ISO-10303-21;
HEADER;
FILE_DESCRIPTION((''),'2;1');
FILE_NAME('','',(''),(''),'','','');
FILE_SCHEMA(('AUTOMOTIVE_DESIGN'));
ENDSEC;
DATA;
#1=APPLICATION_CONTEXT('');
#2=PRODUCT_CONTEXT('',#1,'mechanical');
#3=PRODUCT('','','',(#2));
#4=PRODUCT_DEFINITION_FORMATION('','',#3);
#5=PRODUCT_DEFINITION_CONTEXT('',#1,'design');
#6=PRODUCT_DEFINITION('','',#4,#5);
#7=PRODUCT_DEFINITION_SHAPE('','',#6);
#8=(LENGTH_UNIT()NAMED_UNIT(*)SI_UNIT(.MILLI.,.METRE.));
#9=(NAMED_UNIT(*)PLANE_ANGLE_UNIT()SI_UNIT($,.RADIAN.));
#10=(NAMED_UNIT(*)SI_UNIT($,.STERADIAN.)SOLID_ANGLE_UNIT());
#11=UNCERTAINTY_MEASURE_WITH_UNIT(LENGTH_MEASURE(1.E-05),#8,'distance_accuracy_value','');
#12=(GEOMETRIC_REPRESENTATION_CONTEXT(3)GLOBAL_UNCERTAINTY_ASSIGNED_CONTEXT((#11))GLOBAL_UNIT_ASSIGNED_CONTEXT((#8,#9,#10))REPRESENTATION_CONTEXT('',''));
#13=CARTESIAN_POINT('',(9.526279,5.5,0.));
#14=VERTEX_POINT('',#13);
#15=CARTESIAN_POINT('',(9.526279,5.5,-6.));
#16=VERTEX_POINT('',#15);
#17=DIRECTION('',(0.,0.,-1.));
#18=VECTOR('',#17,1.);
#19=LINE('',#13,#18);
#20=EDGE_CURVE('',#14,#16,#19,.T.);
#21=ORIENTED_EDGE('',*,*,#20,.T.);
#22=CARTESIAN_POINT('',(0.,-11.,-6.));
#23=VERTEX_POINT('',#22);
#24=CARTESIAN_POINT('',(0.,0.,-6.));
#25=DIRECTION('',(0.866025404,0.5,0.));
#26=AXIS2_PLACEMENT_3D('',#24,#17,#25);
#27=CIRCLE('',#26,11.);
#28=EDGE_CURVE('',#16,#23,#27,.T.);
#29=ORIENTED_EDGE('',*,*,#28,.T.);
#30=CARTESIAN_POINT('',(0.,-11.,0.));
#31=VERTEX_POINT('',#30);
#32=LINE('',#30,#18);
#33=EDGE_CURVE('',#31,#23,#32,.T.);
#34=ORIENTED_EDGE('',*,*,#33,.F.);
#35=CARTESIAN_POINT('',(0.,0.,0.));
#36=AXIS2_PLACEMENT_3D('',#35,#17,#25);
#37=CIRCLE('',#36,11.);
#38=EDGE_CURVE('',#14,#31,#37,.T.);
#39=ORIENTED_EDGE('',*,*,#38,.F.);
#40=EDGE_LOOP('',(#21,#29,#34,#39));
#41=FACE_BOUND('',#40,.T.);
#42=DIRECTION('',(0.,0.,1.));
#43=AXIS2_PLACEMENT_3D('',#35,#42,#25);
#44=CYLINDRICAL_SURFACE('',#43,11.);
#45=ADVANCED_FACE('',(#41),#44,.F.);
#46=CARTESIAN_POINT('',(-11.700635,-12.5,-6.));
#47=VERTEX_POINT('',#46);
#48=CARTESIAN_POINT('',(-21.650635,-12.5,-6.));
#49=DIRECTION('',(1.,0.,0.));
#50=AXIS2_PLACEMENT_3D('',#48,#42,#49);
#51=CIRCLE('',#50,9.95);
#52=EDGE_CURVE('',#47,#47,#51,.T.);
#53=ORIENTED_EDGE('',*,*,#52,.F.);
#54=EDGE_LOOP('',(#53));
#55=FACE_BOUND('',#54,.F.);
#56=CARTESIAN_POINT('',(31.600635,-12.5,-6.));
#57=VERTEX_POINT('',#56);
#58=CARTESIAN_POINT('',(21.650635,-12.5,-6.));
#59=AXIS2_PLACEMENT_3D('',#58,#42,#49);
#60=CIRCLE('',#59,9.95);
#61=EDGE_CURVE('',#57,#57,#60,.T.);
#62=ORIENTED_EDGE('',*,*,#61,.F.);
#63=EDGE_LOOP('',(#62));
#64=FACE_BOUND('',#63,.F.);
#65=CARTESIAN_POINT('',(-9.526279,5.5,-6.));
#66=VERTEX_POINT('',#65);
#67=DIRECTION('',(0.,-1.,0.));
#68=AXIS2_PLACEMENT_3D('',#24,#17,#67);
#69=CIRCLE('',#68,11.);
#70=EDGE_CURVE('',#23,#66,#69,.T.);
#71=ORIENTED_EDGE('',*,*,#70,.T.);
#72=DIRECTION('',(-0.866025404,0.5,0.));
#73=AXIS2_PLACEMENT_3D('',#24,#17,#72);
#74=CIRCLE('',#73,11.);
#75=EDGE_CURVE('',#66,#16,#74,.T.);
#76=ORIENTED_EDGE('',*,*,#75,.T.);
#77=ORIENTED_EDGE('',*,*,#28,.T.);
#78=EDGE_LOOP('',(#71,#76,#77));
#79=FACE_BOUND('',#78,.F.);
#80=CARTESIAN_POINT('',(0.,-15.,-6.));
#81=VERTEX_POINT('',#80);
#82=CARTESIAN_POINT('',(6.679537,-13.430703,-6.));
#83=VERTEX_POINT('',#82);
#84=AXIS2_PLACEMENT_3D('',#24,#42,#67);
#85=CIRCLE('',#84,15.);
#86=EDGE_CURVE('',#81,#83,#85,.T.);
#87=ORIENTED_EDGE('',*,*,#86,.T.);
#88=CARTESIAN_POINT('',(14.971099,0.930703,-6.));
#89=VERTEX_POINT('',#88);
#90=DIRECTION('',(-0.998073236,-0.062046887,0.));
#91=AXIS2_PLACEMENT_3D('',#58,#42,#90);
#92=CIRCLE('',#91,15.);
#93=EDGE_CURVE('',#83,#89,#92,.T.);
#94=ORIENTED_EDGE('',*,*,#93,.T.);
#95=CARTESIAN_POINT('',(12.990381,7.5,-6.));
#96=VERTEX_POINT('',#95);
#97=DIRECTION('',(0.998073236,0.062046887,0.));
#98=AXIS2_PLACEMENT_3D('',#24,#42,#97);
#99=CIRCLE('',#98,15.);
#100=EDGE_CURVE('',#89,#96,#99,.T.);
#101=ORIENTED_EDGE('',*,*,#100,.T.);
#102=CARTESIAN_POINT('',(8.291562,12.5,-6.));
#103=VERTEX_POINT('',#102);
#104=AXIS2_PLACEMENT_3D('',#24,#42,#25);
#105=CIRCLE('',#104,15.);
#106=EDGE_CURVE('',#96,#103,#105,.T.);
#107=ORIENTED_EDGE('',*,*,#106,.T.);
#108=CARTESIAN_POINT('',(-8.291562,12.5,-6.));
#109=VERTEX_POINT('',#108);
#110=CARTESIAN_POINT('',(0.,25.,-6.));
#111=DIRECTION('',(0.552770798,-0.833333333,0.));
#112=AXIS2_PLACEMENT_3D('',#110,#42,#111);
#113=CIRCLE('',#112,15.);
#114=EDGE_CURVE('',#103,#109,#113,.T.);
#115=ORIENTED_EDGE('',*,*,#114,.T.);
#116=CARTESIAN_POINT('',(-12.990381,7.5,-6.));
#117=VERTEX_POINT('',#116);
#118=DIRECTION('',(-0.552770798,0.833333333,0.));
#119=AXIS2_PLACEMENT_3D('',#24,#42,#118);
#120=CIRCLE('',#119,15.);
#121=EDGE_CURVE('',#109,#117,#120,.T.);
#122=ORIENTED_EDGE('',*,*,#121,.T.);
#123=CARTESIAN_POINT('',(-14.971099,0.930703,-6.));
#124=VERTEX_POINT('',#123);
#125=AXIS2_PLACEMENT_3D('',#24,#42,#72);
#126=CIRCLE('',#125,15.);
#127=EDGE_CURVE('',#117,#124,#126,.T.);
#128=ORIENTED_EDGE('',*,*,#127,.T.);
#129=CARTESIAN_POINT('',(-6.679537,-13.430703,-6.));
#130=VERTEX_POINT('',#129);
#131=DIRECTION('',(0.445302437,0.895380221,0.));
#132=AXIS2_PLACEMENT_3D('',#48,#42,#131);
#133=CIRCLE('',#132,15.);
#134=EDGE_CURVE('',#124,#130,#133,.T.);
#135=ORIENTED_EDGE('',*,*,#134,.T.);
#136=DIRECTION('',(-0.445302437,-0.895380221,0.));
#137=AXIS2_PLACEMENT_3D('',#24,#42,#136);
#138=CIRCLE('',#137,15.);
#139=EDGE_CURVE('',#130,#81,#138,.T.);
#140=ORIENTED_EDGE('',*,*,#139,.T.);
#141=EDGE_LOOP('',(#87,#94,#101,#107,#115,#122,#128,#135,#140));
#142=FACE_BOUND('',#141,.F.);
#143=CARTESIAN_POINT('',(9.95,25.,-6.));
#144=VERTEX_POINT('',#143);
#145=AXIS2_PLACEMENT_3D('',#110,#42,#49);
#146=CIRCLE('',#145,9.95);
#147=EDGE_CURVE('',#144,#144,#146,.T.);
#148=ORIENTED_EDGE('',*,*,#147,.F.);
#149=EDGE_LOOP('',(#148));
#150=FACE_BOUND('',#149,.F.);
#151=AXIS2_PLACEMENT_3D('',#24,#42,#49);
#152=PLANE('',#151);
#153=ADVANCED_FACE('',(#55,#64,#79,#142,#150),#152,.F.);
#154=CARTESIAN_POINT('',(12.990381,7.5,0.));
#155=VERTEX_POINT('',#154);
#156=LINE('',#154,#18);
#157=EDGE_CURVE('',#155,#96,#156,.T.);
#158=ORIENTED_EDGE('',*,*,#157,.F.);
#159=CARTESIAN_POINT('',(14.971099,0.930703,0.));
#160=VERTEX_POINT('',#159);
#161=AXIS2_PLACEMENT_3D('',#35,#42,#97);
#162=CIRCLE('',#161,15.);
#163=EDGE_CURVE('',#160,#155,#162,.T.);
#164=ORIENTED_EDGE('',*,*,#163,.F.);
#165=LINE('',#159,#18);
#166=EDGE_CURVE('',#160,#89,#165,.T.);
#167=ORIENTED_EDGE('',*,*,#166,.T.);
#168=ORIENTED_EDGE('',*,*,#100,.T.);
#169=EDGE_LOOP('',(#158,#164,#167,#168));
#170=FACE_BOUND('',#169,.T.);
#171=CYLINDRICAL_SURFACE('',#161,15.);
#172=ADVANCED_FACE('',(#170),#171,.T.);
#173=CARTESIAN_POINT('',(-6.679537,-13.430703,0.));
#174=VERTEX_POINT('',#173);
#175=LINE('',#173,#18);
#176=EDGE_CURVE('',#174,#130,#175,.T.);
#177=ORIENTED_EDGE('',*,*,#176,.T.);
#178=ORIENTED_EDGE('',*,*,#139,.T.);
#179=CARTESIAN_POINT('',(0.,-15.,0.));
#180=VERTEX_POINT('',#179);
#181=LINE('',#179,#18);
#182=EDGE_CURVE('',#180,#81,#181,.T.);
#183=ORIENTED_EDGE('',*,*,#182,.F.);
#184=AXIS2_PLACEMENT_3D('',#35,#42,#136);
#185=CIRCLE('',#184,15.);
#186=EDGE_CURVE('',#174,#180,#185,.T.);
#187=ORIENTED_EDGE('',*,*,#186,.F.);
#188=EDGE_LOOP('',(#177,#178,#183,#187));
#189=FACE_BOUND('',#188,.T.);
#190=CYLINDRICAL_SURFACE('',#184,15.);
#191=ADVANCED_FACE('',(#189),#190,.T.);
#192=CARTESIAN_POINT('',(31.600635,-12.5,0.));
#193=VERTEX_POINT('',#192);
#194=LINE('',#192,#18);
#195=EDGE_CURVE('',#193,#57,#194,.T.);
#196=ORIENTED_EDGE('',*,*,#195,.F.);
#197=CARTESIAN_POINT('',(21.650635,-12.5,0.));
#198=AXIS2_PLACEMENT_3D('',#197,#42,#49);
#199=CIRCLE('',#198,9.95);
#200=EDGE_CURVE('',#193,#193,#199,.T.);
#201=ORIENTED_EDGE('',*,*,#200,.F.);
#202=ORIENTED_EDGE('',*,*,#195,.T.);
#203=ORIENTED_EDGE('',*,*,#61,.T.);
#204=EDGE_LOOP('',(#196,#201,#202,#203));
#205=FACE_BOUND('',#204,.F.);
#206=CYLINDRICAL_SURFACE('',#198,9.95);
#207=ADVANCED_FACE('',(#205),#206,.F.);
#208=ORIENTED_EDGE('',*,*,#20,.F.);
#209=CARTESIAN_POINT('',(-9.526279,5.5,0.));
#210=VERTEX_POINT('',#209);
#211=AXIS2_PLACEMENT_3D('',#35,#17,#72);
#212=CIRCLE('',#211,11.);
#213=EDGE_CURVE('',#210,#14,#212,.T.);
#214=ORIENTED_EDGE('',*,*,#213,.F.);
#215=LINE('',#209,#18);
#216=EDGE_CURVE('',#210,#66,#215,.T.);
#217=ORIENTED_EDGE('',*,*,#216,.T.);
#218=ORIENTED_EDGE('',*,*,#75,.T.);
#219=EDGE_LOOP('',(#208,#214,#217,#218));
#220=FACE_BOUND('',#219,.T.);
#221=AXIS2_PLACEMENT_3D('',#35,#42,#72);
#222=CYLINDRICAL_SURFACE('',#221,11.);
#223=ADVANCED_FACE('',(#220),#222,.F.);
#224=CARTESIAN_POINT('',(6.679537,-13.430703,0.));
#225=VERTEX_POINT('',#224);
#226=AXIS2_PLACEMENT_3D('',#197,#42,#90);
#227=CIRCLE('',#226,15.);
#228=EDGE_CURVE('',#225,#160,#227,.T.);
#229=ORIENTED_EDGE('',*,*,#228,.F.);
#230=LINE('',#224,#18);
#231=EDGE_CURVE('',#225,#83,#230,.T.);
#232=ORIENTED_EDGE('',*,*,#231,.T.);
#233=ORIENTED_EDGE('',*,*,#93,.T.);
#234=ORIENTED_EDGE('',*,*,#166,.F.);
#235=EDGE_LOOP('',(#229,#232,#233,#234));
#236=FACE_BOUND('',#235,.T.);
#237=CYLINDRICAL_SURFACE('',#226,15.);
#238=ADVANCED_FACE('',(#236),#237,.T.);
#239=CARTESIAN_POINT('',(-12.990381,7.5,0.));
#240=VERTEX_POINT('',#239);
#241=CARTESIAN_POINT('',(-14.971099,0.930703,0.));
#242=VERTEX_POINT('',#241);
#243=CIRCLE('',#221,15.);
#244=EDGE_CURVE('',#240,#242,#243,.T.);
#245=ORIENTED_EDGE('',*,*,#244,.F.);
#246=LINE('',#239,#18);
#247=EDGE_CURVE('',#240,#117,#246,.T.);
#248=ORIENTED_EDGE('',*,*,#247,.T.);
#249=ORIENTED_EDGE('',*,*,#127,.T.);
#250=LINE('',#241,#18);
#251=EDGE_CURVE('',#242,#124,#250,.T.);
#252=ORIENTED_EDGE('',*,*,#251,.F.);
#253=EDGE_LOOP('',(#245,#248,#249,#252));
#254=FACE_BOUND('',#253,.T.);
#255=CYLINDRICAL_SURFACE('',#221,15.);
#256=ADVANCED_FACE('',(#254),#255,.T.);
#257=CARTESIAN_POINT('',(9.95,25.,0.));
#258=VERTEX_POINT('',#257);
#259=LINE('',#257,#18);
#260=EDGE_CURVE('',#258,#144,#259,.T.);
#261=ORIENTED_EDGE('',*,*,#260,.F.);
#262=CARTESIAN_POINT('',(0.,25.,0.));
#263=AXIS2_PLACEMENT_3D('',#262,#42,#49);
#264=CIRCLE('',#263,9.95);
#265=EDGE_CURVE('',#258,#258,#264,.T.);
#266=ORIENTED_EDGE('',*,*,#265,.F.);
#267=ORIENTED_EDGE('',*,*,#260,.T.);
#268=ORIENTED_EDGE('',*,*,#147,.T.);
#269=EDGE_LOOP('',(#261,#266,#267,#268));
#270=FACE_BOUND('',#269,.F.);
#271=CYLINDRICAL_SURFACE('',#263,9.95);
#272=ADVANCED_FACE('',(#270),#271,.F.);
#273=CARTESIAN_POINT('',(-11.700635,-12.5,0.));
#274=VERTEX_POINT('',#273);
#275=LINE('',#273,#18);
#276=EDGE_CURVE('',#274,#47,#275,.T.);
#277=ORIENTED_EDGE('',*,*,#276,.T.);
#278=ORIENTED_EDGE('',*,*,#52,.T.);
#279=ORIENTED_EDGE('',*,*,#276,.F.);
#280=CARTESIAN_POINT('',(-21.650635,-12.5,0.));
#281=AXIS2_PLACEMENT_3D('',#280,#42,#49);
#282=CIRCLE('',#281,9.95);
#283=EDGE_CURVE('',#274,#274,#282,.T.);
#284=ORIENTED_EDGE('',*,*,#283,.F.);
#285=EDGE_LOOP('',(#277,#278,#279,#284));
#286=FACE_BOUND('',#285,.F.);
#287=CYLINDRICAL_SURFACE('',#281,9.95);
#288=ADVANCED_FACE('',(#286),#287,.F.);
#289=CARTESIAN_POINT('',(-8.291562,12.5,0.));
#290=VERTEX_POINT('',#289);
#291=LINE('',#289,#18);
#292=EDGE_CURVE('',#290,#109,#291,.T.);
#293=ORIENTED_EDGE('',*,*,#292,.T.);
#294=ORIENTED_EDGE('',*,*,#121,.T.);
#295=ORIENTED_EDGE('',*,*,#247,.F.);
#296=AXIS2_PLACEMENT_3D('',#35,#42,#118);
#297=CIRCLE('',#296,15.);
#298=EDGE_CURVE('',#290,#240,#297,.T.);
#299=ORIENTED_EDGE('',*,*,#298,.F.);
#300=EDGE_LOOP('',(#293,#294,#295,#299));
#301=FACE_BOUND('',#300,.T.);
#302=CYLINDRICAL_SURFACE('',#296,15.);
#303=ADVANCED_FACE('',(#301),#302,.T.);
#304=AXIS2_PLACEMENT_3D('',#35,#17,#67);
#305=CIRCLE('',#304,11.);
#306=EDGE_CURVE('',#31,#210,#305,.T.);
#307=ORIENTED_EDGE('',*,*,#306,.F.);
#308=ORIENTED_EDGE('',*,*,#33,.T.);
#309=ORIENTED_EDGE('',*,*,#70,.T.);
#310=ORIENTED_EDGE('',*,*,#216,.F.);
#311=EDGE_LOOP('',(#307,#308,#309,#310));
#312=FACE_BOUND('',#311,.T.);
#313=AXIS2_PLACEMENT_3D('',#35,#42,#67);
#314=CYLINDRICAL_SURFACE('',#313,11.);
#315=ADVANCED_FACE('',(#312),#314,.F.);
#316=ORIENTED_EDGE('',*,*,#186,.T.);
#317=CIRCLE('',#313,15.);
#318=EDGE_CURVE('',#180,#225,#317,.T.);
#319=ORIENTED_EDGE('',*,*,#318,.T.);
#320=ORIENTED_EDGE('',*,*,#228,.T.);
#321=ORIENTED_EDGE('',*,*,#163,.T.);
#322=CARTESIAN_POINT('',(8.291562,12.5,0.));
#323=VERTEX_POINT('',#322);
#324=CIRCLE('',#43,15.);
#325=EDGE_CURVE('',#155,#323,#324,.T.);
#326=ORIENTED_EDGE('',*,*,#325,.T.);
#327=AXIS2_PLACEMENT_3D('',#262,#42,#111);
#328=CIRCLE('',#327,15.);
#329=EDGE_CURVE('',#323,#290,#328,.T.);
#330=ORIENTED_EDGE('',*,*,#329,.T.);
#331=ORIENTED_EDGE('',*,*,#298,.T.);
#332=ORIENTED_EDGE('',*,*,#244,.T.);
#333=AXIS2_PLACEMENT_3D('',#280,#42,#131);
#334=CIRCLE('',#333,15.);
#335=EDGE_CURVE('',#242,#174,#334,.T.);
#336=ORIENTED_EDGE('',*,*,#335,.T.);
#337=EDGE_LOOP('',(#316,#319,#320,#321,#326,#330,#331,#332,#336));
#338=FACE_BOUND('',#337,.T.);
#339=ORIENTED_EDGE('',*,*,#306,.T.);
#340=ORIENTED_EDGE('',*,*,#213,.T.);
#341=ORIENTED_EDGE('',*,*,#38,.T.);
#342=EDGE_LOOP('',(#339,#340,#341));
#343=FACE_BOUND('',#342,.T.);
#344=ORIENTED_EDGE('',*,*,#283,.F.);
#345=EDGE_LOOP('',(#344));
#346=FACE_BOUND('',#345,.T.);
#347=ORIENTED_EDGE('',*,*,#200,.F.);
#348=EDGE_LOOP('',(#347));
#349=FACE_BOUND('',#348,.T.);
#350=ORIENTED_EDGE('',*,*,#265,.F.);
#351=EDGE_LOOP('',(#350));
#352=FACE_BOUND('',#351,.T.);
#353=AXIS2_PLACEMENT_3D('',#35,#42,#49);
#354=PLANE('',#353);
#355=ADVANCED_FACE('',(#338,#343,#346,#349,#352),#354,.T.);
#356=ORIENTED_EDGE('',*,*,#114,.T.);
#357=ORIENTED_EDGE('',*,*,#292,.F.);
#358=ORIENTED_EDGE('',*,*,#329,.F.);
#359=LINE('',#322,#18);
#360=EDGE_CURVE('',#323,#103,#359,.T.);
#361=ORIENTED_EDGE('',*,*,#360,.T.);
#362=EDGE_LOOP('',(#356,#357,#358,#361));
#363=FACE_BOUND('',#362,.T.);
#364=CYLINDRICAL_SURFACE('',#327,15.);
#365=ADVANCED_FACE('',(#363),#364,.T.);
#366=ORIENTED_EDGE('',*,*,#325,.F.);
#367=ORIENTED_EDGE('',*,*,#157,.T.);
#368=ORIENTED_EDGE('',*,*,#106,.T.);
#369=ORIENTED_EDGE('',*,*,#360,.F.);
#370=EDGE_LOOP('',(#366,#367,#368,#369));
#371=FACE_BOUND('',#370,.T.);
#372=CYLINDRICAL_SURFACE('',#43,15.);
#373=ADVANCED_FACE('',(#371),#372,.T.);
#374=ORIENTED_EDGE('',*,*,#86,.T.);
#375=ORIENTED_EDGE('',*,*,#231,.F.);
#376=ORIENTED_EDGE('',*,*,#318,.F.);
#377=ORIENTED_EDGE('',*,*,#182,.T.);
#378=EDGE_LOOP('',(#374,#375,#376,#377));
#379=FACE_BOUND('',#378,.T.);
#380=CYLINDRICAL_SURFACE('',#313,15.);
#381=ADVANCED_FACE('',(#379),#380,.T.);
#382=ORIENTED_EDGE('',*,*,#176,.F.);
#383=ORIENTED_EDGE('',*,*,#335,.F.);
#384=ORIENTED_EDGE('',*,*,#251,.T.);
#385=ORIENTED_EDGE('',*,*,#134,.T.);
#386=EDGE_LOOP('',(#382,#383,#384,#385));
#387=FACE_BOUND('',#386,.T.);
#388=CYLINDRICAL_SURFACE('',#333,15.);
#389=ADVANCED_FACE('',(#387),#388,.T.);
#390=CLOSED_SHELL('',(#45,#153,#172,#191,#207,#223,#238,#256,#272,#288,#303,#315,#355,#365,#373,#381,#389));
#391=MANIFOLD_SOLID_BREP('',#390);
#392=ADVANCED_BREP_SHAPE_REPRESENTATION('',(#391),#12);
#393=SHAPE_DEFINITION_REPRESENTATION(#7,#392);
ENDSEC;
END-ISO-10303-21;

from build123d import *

# Parameters (mm, degrees)
F0_R     = 9.95
F1_DEPTH = 6


# Not quite as in the source:
# - a feature names something its author has since deleted; it is built from what else it names


with BuildPart() as f1:
    # F0 (on Top) → F1 (new body)
    with BuildSketch(Plane.XY):
        with BuildLine():
            ThreePointArc((8.2915619759, 12.5), (0, 40), (-8.2915619759, 12.5))
            ThreePointArc((-8.2915619759, 12.5), (-10.9307033082, 10.2722794544), (-12.9903810568, 7.5))
            ThreePointArc((-12.9903810568, 7.5), (-14.3614066163, 4.3301270189), (-14.9710985352, 0.9307033082))
            ThreePointArc((-14.9710985352, 0.9307033082), (-34.6410161514, -20), (-6.6795365594, -13.4307033082))
            ThreePointArc((-6.6795365594, -13.4307033082), (-3.4307033082, -14.6024064733), (0, -15))
            ThreePointArc((0, -15), (3.4307033082, -14.6024064733), (6.6795365594, -13.4307033082))
            ThreePointArc((6.6795365594, -13.4307033082), (34.6410161514, -20), (14.9710985352, 0.9307033082))
            ThreePointArc((14.9710985352, 0.9307033082), (14.3614066163, 4.3301270189), (12.9903810568, 7.5))
            ThreePointArc((12.9903810568, 7.5), (10.9307033082, 10.2722794544), (8.2915619759, 12.5))
        make_face()
        with Locations((-21.6506350946, -12.5)):
            Circle(F0_R, mode=Mode.SUBTRACT)
        with Locations((21.6506350946, -12.5)):
            Circle(F0_R, mode=Mode.SUBTRACT)
        with BuildLine():
            ThreePointArc((-9.5262794416, 5.5), (0, 11), (9.5262794416, 5.5))
            ThreePointArc((9.5262794416, 5.5), (9.5262794416, -5.5), (0, -11))
            ThreePointArc((0, -11), (-9.5262794416, -5.5), (-9.5262794416, 5.5))
        make_face(mode=Mode.SUBTRACT)
        with Locations((0, 25)):
            Circle(F0_R, mode=Mode.SUBTRACT)
    extrude(amount=-F1_DEPTH)


solid = f1.part
